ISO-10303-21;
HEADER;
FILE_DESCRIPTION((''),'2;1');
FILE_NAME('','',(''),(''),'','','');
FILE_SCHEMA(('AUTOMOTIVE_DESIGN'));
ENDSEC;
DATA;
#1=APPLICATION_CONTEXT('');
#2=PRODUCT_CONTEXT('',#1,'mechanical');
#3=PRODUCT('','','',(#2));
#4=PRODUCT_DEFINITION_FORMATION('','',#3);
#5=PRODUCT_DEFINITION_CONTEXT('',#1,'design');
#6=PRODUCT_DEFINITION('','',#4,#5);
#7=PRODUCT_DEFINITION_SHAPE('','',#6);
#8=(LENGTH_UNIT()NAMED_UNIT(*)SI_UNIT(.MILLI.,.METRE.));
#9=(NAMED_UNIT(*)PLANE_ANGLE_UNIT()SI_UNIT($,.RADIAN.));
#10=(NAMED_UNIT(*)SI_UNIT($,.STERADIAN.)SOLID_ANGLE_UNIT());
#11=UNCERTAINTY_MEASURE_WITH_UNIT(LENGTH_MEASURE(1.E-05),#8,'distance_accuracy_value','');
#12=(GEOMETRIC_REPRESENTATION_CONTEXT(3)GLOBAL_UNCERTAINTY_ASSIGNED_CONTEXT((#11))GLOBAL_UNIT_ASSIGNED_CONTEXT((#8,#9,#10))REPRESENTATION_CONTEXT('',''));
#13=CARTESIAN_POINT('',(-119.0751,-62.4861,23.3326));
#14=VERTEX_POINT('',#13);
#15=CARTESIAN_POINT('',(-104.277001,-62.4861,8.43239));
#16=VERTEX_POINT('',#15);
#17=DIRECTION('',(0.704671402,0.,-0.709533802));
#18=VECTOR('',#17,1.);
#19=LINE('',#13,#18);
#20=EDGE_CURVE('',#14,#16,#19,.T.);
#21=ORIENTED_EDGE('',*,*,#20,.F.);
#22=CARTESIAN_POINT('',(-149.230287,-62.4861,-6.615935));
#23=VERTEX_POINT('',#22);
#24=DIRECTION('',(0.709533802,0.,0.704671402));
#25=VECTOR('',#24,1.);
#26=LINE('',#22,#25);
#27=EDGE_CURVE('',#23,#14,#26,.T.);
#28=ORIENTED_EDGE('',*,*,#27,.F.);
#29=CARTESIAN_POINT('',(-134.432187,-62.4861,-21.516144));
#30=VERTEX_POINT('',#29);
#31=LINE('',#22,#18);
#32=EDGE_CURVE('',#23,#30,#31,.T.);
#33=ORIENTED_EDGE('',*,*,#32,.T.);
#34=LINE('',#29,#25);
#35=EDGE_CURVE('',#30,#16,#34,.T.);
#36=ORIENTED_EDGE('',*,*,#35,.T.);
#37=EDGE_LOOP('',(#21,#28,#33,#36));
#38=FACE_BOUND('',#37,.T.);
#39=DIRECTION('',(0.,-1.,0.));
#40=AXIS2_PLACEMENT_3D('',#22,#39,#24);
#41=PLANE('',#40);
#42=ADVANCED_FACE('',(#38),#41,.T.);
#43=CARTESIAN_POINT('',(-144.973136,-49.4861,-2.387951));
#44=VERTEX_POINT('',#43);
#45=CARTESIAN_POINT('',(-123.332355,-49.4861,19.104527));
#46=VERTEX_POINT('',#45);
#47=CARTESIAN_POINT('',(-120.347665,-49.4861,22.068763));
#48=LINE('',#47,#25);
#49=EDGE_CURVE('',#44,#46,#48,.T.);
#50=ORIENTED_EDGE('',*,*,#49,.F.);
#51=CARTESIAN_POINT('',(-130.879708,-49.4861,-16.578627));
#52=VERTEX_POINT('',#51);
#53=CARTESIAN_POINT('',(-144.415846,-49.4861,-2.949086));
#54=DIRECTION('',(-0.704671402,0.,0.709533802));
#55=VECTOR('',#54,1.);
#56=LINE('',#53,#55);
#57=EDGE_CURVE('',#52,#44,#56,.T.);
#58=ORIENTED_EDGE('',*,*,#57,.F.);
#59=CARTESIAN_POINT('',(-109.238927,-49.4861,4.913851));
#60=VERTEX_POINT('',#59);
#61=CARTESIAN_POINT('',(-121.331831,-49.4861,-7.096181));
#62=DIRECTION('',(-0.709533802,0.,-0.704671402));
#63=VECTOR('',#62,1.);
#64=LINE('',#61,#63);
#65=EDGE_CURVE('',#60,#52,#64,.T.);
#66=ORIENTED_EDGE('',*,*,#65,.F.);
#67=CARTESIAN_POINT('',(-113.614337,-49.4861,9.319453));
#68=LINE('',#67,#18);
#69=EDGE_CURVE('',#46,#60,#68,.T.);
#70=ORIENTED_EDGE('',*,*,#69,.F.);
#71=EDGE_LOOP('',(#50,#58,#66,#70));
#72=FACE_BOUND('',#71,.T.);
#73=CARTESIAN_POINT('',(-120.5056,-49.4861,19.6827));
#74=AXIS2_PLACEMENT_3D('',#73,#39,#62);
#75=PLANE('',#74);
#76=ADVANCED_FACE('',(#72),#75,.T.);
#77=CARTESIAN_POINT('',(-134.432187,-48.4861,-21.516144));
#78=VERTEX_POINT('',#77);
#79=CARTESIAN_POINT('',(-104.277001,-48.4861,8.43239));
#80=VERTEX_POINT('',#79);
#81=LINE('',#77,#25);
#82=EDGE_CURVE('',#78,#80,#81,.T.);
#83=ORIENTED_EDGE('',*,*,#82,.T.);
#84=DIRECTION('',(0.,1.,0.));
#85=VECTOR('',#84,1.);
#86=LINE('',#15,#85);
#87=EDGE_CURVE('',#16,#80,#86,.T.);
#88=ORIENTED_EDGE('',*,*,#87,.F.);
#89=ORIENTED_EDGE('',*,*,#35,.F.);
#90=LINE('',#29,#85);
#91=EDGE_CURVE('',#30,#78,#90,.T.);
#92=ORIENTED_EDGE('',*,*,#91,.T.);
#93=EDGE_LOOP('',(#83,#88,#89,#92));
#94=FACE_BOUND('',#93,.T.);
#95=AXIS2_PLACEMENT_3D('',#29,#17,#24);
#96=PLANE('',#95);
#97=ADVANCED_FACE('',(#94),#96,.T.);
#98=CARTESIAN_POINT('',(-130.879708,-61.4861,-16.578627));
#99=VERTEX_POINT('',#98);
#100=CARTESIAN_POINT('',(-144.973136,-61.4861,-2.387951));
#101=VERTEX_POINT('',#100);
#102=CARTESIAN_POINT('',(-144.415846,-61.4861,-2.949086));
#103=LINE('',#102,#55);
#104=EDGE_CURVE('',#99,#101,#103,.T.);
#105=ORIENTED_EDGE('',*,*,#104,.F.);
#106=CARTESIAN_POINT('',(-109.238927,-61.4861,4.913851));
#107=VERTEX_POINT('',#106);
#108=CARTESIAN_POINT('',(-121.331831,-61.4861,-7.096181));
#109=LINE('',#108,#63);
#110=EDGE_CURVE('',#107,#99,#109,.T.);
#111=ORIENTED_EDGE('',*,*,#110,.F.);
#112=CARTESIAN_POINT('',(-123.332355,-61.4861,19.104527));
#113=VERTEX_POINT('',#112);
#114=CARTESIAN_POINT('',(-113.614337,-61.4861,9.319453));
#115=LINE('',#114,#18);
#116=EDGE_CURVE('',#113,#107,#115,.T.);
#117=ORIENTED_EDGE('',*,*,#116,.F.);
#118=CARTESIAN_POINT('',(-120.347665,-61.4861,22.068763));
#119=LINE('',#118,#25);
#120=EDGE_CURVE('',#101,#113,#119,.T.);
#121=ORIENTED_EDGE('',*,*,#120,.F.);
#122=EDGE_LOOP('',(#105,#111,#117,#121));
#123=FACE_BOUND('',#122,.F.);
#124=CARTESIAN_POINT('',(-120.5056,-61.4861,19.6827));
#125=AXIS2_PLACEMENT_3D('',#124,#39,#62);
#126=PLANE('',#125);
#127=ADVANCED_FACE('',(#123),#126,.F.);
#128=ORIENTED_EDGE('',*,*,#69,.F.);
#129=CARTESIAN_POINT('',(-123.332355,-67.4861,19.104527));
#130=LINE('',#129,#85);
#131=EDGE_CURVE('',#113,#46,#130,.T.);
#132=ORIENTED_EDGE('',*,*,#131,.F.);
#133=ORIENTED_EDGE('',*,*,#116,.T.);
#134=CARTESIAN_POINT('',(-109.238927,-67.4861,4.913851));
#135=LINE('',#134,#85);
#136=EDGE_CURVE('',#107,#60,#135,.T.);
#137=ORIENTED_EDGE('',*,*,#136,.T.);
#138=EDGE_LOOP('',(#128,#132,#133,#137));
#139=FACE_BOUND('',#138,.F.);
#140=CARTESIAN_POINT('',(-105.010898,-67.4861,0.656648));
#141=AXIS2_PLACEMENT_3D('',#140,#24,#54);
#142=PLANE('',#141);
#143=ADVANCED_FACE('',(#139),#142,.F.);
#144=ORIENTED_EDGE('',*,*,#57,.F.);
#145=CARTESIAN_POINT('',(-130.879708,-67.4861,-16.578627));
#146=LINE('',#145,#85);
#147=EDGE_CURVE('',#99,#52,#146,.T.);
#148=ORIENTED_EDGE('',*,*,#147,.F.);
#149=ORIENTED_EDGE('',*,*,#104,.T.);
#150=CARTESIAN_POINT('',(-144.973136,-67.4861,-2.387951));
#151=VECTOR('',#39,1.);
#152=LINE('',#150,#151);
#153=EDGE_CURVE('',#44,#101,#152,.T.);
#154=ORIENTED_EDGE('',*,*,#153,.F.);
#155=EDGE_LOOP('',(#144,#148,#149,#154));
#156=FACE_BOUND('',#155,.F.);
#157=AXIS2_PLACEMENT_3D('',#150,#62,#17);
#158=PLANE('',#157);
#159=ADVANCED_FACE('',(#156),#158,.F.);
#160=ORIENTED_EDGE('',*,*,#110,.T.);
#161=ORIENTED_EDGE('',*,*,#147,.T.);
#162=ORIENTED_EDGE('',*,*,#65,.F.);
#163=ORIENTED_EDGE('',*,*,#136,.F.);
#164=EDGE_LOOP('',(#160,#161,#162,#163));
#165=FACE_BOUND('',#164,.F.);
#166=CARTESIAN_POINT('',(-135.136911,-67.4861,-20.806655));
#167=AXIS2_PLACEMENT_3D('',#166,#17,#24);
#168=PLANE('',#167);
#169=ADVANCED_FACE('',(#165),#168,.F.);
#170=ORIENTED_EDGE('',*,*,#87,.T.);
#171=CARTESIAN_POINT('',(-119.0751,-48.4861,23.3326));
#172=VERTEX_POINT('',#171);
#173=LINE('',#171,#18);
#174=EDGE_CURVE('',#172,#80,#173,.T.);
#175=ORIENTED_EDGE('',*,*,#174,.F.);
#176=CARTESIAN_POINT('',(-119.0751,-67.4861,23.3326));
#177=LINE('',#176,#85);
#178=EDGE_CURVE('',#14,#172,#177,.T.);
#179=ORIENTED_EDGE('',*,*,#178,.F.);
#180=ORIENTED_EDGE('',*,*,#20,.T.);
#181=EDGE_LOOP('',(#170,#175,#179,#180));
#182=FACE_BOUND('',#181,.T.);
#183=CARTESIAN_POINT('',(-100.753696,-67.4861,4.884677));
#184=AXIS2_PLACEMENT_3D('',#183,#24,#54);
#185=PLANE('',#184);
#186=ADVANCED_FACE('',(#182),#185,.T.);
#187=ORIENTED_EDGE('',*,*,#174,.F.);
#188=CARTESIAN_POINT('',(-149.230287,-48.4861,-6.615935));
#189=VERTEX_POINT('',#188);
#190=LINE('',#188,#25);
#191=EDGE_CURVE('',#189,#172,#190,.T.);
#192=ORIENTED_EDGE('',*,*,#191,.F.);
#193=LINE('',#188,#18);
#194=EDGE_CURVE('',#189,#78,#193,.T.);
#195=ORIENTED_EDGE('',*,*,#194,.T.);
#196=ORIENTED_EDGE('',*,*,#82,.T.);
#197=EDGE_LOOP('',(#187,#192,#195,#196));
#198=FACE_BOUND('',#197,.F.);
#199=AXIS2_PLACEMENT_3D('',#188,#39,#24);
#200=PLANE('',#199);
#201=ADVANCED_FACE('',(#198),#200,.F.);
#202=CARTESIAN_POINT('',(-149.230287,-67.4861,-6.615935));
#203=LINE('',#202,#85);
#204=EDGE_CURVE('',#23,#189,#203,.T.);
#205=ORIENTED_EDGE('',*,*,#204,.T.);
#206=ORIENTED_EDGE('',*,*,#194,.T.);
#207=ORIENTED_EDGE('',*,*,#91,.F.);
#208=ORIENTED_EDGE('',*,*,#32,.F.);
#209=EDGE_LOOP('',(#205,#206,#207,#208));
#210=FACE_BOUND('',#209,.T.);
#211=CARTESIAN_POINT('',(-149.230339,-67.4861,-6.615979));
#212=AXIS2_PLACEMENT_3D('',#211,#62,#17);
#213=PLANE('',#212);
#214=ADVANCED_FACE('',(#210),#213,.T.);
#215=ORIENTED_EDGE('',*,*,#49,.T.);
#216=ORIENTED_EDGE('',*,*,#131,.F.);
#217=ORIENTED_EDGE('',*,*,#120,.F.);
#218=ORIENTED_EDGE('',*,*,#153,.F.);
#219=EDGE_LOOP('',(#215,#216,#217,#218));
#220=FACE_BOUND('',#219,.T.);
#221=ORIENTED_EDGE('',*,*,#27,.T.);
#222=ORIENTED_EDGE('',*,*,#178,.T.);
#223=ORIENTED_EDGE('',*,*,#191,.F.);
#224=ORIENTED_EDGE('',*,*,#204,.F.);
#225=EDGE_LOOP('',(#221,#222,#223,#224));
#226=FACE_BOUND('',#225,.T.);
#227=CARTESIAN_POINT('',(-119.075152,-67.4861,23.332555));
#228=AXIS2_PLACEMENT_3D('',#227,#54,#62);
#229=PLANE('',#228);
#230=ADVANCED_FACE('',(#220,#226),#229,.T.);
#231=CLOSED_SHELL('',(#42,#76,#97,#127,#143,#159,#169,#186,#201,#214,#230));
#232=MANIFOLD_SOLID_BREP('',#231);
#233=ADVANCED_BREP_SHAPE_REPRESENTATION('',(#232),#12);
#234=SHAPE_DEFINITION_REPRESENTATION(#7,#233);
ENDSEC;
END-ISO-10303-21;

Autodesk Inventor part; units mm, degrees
ref_plane "YZ Plane" through (0, 0, 0) normal (1, 0, 0) x (0, 1, 0)
ref_plane "XZ Plane" through (0, 0, 0) normal (0, 1, 0) x (-1, 0, 0)
ref_plane "XY Plane" through (0, 0, 0) normal (0, 0, 1) x (1, 0, 0)
ref_plane "Work Plane1" through (-120.5056, -67.4861, 19.6827) normal (0, -1, 0) x (-0.7095338, 0, -0.7046714)
sketch "Sketch1" plane through (-120.5056, -67.4861, 19.6827) normal (0, -1, 0) x (-0.7095338, 0, -0.7046714)
  line L0 (-3.5869, -1.5817) -> (38.9131, -1.5817)
  line L1 (38.9131, -1.5817) -> (38.9131, 24.4183)
  line L2 (38.9131, 24.4183) -> (-3.5869, 24.4183)
  line L3 (-3.5869, 24.4183) -> (-3.5869, -1.5817)
  point P0 (-71.6329, 98.8824)
  dimension "d0" = 42.5
  dimension "d1" = 26
extrude "Extrusion1" add sketch "Sketch1" against normal blind 24
shell "Shell1" thickness 6 removed faces 1 at (-129.1269, -59.4861, 13.3497)
sketch "Sketch2" plane through (-119.0751, -67.4861, 23.3326) normal (-0.7046714, 0, 0.7095338) x (0.7095338, 0, 0.7046714)
  line L0 (0, 0) -> (-42.5, 0) projected
  line L1 (-42.5, 0) -> (-42.5, 24) projected
  line L2 (0, 0) -> (-42.5, 0)
  line L3 (-42.5, 0) -> (-42.5, 5)
  line L4 (-42.5, 5) -> (0, 5)
  line L5 (0, 5) -> (0, 0)
  line L6 (0, 24) -> (-42.5, 24)
  line L7 (-42.5, 24) -> (-42.5, 19)
  line L8 (-42.5, 19) -> (0, 19)
  line L9 (0, 19) -> (0, 24)
  point P0 (68.046, 67.4861)
  dimension "d5" = 5
  dimension "d7" = 5
extrude "Extrusion2" cut sketch "Sketch2" against normal through all
sketch "Sketch3" plane through (-119.0751, -62.4861, 23.3326) normal (0, -1, 0) x (-0.7095338, 0, -0.7046714)
  line L0 (42.5, 26) -> (42.5, 0) projected
  line L1 (0, 26) -> (42.5, 26)
  line L2 (42.5, 26) -> (42.5, 21)
  line L3 (42.5, 21) -> (0, 21)
  line L4 (0, 21) -> (0, 26)
  point P0 (-68.046, 100.4641)
  dimension "d10" = 5
extrude "Extrusion3" cut sketch "Sketch3" against normal through all
properties part number "ServoHolder"
